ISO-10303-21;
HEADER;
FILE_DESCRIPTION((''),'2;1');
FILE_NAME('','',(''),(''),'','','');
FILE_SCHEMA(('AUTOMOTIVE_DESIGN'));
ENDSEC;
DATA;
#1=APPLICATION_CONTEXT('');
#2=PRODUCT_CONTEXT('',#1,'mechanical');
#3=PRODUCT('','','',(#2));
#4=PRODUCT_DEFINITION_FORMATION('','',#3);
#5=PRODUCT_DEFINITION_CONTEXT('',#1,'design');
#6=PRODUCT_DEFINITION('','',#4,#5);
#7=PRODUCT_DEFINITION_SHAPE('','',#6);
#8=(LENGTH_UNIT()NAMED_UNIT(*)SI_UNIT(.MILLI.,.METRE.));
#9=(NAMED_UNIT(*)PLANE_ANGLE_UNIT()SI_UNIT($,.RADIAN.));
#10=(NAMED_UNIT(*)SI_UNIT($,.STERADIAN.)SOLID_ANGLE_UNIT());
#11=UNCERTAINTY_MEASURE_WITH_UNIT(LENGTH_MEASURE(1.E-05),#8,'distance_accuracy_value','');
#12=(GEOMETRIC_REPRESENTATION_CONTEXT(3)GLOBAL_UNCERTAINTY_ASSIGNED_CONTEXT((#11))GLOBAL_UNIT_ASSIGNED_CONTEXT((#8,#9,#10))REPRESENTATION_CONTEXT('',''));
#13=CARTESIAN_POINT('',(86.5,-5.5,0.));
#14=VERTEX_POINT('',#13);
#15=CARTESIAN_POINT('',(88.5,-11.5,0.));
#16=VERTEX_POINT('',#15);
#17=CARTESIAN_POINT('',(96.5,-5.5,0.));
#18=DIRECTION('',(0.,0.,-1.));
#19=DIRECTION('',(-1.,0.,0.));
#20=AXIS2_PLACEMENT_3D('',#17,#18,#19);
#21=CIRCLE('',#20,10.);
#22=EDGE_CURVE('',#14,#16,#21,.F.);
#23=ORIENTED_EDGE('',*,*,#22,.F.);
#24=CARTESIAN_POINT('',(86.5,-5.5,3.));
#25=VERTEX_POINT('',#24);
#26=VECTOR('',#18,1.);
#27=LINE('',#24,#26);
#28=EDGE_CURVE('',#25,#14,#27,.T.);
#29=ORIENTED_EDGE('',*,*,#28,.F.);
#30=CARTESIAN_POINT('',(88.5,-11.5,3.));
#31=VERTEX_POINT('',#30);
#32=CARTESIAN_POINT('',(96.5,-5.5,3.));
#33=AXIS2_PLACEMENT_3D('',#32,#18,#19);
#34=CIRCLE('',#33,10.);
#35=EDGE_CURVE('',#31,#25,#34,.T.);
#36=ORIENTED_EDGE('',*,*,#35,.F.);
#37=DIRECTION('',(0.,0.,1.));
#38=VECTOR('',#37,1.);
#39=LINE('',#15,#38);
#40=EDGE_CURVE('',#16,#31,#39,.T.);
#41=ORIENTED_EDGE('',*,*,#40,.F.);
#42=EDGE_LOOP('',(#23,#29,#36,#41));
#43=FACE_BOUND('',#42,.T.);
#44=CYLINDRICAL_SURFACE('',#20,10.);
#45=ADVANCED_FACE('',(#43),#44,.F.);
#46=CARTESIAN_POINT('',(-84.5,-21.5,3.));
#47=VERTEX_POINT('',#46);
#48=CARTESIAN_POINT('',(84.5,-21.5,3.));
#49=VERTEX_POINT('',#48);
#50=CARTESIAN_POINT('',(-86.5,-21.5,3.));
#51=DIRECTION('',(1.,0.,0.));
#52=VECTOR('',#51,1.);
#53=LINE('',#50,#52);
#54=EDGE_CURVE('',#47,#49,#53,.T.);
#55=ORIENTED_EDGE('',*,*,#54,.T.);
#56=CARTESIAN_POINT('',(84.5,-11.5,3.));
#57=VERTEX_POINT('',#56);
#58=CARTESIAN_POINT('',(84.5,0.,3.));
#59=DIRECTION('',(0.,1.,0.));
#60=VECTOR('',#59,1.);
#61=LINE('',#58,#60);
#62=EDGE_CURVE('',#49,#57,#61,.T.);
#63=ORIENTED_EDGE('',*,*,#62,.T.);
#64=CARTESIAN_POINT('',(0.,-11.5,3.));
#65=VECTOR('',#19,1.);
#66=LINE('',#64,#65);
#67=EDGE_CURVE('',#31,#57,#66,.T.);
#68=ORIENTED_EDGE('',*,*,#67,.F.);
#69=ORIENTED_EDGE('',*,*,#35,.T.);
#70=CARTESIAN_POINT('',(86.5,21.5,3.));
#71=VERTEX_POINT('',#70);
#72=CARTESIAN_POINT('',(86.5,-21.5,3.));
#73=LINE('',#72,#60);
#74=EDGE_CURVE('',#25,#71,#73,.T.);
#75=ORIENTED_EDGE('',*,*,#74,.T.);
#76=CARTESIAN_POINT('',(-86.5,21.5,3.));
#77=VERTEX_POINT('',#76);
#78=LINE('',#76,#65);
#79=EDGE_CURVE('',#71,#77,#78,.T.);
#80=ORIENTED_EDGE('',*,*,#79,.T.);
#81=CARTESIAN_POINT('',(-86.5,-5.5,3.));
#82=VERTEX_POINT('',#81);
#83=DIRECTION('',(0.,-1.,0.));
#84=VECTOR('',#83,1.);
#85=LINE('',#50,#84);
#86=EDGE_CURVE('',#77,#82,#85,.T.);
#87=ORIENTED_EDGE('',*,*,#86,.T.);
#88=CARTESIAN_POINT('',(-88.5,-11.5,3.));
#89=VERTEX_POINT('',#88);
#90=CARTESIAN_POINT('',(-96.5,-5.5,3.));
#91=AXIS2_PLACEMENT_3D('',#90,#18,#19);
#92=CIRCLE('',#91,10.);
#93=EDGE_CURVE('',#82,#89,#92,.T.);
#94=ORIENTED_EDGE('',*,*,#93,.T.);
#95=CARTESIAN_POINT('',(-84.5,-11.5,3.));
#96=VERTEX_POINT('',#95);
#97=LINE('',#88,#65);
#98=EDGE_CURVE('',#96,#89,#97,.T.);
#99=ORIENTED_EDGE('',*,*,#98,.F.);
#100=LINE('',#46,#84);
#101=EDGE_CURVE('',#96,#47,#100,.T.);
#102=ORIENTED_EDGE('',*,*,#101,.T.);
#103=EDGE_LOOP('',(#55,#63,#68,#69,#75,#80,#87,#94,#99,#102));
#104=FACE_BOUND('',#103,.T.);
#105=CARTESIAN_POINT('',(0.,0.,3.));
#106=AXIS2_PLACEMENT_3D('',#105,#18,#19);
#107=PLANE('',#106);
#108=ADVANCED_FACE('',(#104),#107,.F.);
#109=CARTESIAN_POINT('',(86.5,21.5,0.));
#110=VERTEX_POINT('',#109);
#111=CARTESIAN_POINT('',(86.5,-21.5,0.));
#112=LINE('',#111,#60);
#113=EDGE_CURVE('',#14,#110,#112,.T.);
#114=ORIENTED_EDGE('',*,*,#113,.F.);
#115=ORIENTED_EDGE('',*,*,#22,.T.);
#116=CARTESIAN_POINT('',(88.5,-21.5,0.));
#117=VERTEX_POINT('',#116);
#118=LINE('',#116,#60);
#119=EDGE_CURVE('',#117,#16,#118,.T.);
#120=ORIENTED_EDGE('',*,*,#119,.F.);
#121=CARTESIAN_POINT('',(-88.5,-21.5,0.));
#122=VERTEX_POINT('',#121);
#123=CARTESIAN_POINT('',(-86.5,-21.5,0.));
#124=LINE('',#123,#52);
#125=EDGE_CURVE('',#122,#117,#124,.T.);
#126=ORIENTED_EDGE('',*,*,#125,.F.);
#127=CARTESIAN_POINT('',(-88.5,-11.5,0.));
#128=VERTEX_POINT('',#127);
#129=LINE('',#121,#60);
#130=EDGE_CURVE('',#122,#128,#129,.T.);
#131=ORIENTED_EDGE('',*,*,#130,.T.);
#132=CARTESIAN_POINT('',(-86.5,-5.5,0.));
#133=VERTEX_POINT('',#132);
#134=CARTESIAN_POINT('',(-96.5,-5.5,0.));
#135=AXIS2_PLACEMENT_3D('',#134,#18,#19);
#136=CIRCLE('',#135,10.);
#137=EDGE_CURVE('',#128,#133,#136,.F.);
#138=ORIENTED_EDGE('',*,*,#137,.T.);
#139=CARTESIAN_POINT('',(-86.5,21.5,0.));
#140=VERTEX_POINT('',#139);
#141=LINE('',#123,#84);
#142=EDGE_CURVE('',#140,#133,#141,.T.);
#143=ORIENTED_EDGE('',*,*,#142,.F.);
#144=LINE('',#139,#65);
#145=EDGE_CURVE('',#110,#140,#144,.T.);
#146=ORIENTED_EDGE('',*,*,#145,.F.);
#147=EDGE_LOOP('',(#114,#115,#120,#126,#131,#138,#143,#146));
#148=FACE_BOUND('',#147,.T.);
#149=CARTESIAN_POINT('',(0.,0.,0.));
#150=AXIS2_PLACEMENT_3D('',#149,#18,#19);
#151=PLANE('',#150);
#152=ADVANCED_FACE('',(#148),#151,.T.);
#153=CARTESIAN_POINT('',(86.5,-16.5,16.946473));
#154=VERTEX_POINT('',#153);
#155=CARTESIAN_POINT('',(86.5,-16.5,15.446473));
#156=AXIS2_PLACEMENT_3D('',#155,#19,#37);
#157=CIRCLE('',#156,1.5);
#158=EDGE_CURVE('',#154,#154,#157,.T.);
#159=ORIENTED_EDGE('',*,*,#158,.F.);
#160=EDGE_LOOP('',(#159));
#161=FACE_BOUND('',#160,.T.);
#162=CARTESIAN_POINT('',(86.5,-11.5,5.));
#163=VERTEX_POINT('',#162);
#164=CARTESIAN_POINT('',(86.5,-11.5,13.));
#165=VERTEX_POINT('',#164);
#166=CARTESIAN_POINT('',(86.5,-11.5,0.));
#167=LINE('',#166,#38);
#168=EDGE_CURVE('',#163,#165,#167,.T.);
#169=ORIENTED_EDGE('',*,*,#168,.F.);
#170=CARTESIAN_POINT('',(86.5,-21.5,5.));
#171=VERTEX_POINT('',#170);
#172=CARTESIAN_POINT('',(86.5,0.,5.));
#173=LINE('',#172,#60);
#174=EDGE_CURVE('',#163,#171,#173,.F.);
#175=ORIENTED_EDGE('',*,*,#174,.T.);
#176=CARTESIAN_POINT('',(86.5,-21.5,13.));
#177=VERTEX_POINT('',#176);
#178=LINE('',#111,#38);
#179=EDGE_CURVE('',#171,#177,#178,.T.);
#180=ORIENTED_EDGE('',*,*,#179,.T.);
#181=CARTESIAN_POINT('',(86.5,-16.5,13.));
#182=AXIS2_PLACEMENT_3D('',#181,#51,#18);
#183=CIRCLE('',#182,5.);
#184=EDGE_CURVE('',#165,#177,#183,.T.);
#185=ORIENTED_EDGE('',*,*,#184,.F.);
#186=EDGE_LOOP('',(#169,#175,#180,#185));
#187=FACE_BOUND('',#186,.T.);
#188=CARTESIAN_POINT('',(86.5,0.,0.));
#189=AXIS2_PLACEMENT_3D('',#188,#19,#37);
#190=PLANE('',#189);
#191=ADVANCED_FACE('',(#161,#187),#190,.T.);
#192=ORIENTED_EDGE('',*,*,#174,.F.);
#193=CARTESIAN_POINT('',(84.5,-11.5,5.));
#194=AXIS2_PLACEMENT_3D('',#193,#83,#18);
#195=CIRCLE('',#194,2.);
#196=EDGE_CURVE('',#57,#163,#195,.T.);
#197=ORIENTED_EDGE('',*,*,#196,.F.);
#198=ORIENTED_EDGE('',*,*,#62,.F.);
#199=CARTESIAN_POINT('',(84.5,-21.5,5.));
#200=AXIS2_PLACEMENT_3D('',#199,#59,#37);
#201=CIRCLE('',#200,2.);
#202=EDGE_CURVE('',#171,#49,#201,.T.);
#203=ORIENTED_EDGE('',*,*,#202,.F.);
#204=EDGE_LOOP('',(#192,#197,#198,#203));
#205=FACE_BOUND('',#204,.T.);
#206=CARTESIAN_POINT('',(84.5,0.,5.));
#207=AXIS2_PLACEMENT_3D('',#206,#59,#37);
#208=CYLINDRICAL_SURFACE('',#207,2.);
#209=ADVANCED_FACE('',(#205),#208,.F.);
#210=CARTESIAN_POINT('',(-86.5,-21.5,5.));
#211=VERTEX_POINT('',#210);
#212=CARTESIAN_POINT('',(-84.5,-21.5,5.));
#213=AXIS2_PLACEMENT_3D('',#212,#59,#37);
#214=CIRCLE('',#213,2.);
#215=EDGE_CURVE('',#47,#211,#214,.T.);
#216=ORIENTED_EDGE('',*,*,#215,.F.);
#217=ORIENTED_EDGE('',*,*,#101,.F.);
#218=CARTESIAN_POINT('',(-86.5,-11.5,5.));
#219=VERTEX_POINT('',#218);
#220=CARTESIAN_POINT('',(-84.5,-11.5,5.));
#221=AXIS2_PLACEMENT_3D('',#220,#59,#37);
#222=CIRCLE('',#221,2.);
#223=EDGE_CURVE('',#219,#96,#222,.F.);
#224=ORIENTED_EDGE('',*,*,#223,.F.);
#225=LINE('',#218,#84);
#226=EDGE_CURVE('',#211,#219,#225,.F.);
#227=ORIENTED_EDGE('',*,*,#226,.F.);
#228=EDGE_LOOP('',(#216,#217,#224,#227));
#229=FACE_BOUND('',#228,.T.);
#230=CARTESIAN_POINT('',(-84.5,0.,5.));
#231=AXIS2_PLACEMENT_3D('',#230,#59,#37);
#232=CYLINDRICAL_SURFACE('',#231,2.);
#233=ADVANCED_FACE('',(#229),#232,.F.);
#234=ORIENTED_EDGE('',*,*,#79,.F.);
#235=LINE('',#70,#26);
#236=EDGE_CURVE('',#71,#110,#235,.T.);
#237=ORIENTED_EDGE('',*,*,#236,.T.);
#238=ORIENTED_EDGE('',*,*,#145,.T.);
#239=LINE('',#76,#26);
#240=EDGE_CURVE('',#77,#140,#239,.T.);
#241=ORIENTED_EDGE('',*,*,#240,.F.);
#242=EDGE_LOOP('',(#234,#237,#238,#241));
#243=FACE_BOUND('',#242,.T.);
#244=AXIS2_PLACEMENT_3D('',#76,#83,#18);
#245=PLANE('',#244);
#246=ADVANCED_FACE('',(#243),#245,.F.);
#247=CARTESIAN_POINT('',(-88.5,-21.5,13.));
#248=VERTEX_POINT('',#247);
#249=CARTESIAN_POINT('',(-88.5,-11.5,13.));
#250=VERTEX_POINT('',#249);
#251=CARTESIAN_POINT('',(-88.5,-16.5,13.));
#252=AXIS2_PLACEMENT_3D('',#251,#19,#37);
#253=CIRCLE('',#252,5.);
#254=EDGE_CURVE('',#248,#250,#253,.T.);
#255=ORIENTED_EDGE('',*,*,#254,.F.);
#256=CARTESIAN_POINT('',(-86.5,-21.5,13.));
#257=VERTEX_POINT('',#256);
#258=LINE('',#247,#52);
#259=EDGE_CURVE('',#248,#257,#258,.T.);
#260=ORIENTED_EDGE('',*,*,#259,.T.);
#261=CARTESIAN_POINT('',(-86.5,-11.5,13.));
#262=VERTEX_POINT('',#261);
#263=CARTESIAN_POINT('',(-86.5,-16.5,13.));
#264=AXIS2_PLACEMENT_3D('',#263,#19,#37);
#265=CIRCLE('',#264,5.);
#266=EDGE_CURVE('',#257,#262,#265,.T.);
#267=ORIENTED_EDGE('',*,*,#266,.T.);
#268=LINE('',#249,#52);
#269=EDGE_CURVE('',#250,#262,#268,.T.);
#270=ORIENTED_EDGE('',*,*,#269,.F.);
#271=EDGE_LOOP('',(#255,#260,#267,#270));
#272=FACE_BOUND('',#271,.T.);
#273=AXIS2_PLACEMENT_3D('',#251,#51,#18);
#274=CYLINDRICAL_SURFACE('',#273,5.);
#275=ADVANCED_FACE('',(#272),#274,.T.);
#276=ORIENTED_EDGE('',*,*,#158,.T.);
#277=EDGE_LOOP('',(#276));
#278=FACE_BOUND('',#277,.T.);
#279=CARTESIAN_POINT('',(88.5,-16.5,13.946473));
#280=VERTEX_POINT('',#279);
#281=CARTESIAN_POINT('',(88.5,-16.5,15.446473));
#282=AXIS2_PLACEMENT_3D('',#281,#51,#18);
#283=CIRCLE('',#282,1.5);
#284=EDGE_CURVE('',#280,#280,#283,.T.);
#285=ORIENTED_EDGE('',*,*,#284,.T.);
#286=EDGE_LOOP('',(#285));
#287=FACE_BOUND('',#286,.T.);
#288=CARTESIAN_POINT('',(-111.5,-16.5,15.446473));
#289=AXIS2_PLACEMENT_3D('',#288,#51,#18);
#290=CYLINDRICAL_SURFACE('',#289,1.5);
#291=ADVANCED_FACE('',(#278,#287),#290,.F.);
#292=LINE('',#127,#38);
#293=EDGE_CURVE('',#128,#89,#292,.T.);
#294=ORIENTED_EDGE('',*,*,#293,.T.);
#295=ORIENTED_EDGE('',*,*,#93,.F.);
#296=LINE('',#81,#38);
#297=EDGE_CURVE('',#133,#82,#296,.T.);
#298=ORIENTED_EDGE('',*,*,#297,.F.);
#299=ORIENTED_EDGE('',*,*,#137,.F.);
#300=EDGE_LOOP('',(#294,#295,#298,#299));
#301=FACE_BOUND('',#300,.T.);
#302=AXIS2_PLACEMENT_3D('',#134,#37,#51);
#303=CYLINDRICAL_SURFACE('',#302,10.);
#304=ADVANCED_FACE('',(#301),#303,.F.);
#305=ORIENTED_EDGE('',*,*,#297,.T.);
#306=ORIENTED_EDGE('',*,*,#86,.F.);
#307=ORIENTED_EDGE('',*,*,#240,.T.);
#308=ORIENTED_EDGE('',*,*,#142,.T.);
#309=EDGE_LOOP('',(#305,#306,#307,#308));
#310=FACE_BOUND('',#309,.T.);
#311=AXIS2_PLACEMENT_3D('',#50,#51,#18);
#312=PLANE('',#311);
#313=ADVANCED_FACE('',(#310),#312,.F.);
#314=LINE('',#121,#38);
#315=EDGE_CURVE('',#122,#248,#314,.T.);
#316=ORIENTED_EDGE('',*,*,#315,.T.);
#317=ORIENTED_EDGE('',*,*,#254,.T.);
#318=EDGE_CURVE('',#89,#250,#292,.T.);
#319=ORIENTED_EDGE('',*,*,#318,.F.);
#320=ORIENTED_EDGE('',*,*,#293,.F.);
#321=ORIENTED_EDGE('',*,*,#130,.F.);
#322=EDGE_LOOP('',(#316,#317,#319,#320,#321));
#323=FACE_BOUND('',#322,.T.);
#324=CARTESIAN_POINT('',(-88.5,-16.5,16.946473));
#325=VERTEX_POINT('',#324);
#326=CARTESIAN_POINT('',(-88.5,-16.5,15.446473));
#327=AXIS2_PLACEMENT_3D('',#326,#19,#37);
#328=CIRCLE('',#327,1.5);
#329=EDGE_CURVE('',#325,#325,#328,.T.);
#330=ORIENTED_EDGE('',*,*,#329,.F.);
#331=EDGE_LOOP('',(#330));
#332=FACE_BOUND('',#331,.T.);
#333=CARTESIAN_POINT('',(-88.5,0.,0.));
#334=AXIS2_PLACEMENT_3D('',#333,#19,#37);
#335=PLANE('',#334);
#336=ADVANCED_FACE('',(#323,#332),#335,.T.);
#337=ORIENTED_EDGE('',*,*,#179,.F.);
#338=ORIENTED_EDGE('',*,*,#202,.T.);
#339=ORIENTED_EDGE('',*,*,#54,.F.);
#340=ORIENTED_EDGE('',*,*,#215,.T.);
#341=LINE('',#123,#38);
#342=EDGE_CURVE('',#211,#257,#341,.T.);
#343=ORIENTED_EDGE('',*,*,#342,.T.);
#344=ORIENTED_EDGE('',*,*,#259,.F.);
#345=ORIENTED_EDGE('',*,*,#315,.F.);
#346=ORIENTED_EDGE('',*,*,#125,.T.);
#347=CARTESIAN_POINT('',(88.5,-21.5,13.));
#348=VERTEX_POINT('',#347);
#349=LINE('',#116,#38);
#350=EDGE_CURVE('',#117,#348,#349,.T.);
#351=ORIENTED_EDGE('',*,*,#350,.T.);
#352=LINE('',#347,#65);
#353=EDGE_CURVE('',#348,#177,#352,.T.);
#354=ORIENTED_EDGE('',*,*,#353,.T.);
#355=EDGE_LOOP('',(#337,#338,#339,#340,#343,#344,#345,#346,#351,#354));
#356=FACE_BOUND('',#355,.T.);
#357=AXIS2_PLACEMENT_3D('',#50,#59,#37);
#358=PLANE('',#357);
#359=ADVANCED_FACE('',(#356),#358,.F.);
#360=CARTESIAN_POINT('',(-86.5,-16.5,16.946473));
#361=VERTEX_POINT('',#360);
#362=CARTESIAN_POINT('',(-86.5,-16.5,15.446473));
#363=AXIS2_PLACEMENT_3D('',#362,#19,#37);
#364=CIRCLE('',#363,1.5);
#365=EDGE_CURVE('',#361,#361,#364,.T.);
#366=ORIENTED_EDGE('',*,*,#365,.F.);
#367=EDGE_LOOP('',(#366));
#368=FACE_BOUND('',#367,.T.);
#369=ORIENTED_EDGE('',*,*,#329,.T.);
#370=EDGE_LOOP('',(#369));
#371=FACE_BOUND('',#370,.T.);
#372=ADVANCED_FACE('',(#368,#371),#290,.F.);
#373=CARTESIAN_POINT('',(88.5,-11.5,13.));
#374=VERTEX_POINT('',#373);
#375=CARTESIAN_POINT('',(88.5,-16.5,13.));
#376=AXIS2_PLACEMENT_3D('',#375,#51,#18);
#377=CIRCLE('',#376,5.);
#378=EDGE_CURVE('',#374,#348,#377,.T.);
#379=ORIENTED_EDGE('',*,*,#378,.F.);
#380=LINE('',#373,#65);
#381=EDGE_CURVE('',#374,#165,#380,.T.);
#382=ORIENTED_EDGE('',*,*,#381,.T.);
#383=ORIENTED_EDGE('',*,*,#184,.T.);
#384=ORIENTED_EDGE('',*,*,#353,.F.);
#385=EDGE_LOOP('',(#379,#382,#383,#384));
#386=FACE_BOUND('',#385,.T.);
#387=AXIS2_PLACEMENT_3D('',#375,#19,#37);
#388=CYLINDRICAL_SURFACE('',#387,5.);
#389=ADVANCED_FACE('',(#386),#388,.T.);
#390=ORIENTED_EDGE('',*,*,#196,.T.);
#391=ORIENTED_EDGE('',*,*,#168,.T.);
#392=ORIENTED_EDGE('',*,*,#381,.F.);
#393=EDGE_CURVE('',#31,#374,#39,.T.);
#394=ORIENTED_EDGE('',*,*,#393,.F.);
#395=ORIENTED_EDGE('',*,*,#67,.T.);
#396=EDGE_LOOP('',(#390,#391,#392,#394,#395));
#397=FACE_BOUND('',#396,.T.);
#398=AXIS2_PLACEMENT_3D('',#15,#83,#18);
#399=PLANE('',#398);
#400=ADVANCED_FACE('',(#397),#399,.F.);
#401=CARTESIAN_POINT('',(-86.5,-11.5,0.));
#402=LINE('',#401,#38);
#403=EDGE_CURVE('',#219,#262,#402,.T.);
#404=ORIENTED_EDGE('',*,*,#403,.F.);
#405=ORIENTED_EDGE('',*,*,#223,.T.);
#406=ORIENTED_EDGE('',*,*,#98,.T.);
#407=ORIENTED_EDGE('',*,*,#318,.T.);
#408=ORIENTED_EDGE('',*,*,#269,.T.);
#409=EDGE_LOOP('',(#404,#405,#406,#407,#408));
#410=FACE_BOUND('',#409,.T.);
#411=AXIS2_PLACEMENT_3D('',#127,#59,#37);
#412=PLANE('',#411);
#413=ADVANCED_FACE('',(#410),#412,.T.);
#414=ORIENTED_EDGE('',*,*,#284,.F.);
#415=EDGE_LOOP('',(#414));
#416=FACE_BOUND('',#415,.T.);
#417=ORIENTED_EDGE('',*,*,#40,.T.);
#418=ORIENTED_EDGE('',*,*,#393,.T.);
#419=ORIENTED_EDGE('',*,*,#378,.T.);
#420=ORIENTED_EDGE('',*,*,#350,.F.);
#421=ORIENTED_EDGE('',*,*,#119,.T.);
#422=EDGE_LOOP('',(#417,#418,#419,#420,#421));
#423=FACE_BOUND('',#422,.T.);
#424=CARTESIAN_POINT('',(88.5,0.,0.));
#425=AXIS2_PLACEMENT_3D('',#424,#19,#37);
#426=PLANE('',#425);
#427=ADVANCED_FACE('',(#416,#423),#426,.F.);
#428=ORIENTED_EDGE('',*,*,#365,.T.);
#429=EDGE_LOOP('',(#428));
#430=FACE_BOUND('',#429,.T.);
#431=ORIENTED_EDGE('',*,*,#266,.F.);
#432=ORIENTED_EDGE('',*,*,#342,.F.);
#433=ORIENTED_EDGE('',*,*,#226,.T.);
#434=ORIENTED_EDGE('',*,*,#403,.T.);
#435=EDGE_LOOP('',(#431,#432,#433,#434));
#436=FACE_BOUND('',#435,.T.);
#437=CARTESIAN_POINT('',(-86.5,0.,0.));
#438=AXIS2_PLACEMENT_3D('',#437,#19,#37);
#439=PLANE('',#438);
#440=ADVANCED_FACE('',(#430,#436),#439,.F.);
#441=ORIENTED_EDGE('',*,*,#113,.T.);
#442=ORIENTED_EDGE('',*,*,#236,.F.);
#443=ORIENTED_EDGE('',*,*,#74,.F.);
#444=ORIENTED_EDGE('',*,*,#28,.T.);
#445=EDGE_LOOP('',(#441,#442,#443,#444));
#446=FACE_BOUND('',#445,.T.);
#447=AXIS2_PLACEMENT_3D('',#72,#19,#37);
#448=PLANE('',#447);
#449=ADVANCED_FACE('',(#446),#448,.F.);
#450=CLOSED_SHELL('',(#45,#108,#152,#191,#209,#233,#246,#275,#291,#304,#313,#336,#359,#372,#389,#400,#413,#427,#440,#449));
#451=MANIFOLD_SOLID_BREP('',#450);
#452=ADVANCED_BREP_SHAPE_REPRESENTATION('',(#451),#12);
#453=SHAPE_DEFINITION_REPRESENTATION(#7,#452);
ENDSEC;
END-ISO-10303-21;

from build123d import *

# Parameters (mm, degrees)
SKETCH1_W           = 173
SKETCH1_H           = 43
BOSS_EXTRUDE1_DEPTH = 3
SKETCH2_R           = 5
SKETCH2_W           = 13
SKETCH2_H           = 10
BOSS_EXTRUDE2_DEPTH = 2
BOSS_EXTRUDE3_START = 2
SKETCH3_R           = 5
SKETCH3_W           = 13
SKETCH3_H           = 10
BOSS_EXTRUDE3_DEPTH = 2
SKETCH4_R           = 1.5
CUT_EXTRUDE1_DEPTH  = 200
FILLET1_R           = 10
FILLET2_R           = 2


with BuildPart() as part:
    # Sketch1 → Boss-Extrude1 (new body)
    with BuildSketch(Plane.XY):
        Rectangle(SKETCH1_W, SKETCH1_H)
    extrude(amount=BOSS_EXTRUDE1_DEPTH)

    # Sketch2 → Boss-Extrude2 (add)
    with BuildSketch(Plane.ZY.offset(86.5)):
        with Locations((13, -16.5)):
            Circle(SKETCH2_R)
        with Locations((6.5, -16.5)):
            Rectangle(SKETCH2_W, SKETCH2_H)
    extrude(amount=BOSS_EXTRUDE2_DEPTH)

    # Sketch3 → Boss-Extrude3 (add)
    with BuildSketch(Plane(origin=(86.5, 0, 0), x_dir=(0, 0, -1), z_dir=(1, 0, 0)).offset(BOSS_EXTRUDE3_START)):
        with Locations((-13, -16.5)):
            Circle(SKETCH3_R)
        with Locations((-6.5, -16.5)):
            Rectangle(SKETCH3_W, SKETCH3_H)
    extrude(amount=-BOSS_EXTRUDE3_DEPTH)

    # Sketch4 → Cut-Extrude1 (cut)
    with BuildSketch(Plane(origin=(88.5, 0, 0), x_dir=(0, 0, -1), z_dir=(1, 0, 0))):
        with Locations((-15.446473159, -16.5)):
            Circle(SKETCH4_R)
    extrude(amount=-CUT_EXTRUDE1_DEPTH, mode=Mode.SUBTRACT)

    # Fillet1
    # the kernel refuses this fillet: 10 mm, written as the material it adds along each edge
    with BuildSketch(Plane(origin=(-86.5, -11.5, 3), x_dir=(0, 1, 0), z_dir=(0, 0, -1))) as fillet1_piece_1:
        with BuildLine():
            CenterArc((6, -10), FILLET1_R, 90, 36.869897646)
            Line((0, -2), (0, 0))
            Line((0, 0), (6, 0))
        make_face()
    extrude(amount=3)
    with BuildSketch(Plane(origin=(86.5, -11.5, 3), x_dir=(0, 1, 0), z_dir=(0, 0, -1))) as fillet1_piece_2:
        with BuildLine():
            CenterArc((6, 10), FILLET1_R, 233.130102354, 36.869897646)
            Line((0, 2), (0, 0))
            Line((0, 0), (6, 0))
        make_face()
    extrude(amount=3)

    # Fillet2
    fillet2_edges = [part.edges().sort_by_distance(p)[0] for p in [
        (-86.5, -16.5, 3),
        (86.5, -16.5, 3),
    ]]
    fillet(fillet2_edges, radius=FILLET2_R)


solid = part.part
